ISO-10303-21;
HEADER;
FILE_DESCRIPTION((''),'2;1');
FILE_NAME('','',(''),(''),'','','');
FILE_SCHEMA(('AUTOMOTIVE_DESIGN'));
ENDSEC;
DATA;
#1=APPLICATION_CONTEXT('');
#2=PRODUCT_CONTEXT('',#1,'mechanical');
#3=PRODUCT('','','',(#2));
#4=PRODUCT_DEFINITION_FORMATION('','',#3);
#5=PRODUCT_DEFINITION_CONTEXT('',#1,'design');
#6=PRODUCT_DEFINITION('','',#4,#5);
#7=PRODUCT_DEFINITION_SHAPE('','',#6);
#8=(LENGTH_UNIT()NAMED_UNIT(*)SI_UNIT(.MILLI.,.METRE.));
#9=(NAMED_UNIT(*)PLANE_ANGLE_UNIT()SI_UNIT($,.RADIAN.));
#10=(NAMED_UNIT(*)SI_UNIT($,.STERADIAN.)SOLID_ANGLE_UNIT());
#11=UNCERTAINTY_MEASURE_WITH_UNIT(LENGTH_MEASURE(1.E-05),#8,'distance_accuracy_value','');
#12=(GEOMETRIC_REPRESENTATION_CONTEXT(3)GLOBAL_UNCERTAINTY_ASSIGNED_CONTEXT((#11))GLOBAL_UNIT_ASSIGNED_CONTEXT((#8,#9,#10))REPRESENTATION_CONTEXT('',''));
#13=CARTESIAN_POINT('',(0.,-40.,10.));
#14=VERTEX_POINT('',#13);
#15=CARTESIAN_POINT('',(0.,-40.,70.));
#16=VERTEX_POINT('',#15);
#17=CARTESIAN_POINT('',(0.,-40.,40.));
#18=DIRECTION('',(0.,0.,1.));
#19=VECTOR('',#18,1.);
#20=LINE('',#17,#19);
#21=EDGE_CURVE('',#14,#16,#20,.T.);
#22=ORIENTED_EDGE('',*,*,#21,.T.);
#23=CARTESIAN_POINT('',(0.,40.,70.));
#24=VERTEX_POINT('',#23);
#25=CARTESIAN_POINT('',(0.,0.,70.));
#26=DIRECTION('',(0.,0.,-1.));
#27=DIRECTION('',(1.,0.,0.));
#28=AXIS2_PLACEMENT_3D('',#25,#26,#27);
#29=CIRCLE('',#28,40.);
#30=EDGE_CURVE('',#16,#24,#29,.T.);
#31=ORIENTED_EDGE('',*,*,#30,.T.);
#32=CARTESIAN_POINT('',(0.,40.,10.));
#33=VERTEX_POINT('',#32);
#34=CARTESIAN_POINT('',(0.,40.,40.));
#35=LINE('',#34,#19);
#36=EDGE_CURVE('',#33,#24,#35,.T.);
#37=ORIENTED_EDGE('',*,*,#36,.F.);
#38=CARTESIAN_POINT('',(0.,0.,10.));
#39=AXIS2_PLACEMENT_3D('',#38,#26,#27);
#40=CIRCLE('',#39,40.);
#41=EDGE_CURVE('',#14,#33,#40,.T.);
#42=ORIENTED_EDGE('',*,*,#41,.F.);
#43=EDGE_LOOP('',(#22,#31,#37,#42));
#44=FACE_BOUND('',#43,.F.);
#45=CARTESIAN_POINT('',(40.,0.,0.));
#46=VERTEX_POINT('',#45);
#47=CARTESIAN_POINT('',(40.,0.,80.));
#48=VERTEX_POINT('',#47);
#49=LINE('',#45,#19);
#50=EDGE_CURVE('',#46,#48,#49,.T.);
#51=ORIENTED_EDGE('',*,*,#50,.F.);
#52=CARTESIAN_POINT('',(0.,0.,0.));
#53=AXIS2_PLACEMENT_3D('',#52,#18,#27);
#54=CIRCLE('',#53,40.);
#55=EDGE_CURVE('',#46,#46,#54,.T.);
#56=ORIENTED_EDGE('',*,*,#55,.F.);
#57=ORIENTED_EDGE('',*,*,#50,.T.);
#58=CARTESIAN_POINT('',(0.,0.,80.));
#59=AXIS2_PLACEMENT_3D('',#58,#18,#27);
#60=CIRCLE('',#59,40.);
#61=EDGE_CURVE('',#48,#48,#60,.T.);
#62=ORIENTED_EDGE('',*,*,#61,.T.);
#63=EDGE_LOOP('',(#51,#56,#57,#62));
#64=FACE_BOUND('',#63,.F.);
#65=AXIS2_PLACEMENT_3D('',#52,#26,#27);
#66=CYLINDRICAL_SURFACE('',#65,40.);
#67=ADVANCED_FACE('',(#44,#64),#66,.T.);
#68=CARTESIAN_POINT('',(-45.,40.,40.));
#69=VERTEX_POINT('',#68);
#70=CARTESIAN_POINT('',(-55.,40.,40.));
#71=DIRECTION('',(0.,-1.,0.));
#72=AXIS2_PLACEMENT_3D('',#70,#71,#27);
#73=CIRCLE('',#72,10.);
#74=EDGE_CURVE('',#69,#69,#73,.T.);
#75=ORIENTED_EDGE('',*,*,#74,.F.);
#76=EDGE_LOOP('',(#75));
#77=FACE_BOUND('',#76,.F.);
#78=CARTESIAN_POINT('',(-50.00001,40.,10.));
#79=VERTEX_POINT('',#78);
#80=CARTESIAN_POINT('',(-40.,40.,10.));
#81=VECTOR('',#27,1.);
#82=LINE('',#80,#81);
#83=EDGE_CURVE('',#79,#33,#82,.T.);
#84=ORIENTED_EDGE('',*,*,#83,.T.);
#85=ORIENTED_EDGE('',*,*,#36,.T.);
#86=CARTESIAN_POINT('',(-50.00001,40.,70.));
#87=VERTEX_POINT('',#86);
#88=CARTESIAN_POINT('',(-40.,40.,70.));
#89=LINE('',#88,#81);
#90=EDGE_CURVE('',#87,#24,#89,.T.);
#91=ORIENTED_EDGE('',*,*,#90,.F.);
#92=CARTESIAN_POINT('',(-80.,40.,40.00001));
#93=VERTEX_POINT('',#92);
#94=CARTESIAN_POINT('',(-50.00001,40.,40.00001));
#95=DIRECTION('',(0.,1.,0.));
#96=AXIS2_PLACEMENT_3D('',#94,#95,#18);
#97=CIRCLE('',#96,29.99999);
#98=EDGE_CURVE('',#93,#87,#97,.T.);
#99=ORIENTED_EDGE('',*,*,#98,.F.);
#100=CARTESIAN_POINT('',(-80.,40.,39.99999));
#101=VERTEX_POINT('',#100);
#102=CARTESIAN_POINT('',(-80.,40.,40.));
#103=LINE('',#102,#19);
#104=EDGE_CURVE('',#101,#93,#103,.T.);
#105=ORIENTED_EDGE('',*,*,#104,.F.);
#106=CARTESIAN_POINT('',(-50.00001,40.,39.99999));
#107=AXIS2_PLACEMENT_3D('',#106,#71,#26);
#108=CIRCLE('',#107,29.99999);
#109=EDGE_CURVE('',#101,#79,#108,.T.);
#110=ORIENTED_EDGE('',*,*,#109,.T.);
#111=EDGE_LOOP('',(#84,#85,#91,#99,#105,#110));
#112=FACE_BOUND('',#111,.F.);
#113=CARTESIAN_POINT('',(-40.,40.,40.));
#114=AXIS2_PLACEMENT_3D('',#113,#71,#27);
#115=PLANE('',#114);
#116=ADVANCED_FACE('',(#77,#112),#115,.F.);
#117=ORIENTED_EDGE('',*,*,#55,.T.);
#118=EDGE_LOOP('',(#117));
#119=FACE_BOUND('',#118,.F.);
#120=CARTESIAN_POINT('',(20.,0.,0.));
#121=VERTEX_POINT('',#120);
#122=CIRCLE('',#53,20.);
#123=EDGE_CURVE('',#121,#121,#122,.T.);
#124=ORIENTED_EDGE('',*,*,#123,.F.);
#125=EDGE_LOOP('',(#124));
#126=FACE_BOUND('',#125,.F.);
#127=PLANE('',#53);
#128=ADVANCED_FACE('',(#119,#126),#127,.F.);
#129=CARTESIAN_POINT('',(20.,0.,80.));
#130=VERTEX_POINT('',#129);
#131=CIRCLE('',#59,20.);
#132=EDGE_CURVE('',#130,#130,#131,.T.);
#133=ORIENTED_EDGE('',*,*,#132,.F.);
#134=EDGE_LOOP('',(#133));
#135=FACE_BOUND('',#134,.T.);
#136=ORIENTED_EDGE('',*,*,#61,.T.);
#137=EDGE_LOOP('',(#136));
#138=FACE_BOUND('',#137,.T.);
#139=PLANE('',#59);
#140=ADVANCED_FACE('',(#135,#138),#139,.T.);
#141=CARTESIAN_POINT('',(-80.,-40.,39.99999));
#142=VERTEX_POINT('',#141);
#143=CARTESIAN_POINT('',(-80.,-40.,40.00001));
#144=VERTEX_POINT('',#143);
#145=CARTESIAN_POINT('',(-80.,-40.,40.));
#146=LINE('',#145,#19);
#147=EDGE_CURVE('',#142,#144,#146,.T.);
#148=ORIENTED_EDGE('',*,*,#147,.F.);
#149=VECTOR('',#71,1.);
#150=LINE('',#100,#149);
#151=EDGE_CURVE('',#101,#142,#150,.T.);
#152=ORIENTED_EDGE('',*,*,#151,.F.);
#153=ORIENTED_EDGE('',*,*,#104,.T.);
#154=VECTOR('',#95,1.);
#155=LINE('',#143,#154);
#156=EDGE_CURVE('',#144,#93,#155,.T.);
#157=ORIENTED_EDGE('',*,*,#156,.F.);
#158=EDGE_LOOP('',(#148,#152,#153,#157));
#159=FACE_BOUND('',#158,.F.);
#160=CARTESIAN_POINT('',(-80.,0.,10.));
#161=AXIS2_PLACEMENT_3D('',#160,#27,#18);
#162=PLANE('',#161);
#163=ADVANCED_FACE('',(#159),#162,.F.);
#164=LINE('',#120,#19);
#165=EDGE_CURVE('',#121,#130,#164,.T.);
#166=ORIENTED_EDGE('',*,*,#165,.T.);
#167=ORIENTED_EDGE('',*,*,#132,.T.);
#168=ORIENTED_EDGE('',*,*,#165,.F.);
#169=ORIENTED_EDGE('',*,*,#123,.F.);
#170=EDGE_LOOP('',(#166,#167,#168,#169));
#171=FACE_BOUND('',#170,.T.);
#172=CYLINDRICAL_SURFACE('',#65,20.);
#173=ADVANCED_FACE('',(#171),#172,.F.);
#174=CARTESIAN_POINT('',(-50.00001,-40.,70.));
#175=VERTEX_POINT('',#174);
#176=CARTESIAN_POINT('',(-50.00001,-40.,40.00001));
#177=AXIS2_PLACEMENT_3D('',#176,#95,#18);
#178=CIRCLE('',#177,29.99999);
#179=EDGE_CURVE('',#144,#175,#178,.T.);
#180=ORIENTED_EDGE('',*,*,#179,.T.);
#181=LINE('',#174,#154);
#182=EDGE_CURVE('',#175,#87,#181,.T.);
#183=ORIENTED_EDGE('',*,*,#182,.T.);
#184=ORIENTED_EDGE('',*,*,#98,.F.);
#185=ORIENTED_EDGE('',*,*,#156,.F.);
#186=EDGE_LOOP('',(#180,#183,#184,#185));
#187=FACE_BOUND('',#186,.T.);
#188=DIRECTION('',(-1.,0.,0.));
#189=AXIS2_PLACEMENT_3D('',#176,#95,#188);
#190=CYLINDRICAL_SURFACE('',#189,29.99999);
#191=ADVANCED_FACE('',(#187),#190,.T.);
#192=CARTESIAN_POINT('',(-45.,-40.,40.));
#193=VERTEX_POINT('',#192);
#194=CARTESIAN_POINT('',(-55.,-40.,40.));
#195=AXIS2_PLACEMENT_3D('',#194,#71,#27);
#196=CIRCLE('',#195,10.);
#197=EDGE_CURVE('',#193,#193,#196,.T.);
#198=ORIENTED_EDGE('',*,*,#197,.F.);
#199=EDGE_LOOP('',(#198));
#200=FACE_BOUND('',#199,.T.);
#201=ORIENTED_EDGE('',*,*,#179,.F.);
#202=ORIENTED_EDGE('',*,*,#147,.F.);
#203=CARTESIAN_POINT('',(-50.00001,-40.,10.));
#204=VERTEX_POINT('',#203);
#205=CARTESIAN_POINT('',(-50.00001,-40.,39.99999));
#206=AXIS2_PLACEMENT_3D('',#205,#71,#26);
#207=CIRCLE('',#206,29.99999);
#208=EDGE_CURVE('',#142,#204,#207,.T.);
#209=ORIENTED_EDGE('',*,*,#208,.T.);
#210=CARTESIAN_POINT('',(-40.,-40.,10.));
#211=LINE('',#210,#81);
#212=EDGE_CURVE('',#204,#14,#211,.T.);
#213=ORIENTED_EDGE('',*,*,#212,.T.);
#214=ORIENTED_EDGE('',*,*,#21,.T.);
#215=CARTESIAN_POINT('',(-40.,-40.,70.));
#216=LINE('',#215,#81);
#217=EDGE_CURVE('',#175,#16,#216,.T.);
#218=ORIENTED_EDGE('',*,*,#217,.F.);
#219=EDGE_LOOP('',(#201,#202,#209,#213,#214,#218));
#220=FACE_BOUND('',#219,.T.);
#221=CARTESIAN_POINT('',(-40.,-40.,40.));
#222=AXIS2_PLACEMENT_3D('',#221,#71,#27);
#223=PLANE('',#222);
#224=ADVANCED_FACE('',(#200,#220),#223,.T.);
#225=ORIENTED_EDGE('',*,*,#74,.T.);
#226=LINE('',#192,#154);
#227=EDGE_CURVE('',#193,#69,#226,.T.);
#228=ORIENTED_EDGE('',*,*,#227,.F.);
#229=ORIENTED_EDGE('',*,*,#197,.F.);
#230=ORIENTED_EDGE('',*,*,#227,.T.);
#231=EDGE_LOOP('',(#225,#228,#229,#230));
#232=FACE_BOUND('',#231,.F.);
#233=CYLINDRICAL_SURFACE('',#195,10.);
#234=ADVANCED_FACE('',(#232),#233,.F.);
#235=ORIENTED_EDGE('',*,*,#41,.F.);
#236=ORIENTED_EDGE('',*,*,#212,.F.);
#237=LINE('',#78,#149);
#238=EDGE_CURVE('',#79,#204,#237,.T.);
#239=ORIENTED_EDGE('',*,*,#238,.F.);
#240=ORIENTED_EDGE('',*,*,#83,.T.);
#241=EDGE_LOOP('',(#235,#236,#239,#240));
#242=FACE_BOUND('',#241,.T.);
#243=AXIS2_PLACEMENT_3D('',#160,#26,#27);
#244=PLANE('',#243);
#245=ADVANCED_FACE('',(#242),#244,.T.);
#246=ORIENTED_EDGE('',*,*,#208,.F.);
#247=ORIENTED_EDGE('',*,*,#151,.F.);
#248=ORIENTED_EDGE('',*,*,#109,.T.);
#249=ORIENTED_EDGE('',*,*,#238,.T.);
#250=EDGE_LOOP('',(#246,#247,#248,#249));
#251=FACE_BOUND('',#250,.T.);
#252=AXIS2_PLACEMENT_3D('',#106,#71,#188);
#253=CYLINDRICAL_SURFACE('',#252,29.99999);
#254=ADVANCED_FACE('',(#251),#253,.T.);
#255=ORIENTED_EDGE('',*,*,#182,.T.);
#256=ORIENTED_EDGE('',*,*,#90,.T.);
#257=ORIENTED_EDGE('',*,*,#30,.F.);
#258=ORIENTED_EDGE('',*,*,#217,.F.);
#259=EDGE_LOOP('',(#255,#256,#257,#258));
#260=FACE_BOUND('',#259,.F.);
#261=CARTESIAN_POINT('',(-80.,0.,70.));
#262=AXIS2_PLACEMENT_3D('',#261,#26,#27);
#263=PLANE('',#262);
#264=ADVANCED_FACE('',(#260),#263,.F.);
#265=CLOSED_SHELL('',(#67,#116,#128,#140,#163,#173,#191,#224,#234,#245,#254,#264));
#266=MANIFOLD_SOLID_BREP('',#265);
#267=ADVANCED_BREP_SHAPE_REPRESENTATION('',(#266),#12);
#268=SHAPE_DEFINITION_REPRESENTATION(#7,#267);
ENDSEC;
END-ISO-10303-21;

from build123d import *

# Parameters (mm, degrees)
F0_R     = 40
F0_R_2   = 20
F1_DEPTH = 80
F2_W     = 80
F2_H     = 60
F3_DEPTH = 40
F4_R     = 29.99999
F5_DEPTH = 70.001
F6_R     = 10
F7_DEPTH = 80.001


# Not quite as in the source:
# - a fillet or chamfer is up to 0.001 mm smaller than in the source, because OpenCascade refuses the exact size


with BuildPart() as f1:
    # F0 (on Top) → F1 (new body)
    with BuildSketch(Plane.XY):
        Circle(F0_R)
        Circle(F0_R_2, mode=Mode.SUBTRACT)
    extrude(amount=F1_DEPTH)

    # F2 (on Front) → F3 (join, symmetric)
    with BuildSketch(Plane.XZ):
        with Locations((-40, 40)):
            Rectangle(F2_W, F2_H)
    extrude(amount=F3_DEPTH, both=True)

    # F4 (radius 30 in the source; OpenCascade refuses exactly that, so slightly less here)
    f4_edges = [f1.edges().sort_by_distance(p)[0] for p in [
        (-80, 0, 70),
        (-80, 0, 10),
    ]]
    fillet(f4_edges, radius=F4_R)

    # F5 (cut, through all): a face of the model
    f5_faces = [f1.faces().sort_by_distance(p)[0] for p in [
        (-8.4882636316, 0, 70),
    ]]
    extrude(f5_faces, amount=-F5_DEPTH, mode=Mode.SUBTRACT)

    # F6 (on face) → F7 (cut, through all)
    with BuildSketch(Plane.XZ.offset(40)):
        with Locations((-55, 40)):
            Circle(F6_R)
    extrude(amount=-F7_DEPTH, mode=Mode.SUBTRACT)


solid = f1.part
